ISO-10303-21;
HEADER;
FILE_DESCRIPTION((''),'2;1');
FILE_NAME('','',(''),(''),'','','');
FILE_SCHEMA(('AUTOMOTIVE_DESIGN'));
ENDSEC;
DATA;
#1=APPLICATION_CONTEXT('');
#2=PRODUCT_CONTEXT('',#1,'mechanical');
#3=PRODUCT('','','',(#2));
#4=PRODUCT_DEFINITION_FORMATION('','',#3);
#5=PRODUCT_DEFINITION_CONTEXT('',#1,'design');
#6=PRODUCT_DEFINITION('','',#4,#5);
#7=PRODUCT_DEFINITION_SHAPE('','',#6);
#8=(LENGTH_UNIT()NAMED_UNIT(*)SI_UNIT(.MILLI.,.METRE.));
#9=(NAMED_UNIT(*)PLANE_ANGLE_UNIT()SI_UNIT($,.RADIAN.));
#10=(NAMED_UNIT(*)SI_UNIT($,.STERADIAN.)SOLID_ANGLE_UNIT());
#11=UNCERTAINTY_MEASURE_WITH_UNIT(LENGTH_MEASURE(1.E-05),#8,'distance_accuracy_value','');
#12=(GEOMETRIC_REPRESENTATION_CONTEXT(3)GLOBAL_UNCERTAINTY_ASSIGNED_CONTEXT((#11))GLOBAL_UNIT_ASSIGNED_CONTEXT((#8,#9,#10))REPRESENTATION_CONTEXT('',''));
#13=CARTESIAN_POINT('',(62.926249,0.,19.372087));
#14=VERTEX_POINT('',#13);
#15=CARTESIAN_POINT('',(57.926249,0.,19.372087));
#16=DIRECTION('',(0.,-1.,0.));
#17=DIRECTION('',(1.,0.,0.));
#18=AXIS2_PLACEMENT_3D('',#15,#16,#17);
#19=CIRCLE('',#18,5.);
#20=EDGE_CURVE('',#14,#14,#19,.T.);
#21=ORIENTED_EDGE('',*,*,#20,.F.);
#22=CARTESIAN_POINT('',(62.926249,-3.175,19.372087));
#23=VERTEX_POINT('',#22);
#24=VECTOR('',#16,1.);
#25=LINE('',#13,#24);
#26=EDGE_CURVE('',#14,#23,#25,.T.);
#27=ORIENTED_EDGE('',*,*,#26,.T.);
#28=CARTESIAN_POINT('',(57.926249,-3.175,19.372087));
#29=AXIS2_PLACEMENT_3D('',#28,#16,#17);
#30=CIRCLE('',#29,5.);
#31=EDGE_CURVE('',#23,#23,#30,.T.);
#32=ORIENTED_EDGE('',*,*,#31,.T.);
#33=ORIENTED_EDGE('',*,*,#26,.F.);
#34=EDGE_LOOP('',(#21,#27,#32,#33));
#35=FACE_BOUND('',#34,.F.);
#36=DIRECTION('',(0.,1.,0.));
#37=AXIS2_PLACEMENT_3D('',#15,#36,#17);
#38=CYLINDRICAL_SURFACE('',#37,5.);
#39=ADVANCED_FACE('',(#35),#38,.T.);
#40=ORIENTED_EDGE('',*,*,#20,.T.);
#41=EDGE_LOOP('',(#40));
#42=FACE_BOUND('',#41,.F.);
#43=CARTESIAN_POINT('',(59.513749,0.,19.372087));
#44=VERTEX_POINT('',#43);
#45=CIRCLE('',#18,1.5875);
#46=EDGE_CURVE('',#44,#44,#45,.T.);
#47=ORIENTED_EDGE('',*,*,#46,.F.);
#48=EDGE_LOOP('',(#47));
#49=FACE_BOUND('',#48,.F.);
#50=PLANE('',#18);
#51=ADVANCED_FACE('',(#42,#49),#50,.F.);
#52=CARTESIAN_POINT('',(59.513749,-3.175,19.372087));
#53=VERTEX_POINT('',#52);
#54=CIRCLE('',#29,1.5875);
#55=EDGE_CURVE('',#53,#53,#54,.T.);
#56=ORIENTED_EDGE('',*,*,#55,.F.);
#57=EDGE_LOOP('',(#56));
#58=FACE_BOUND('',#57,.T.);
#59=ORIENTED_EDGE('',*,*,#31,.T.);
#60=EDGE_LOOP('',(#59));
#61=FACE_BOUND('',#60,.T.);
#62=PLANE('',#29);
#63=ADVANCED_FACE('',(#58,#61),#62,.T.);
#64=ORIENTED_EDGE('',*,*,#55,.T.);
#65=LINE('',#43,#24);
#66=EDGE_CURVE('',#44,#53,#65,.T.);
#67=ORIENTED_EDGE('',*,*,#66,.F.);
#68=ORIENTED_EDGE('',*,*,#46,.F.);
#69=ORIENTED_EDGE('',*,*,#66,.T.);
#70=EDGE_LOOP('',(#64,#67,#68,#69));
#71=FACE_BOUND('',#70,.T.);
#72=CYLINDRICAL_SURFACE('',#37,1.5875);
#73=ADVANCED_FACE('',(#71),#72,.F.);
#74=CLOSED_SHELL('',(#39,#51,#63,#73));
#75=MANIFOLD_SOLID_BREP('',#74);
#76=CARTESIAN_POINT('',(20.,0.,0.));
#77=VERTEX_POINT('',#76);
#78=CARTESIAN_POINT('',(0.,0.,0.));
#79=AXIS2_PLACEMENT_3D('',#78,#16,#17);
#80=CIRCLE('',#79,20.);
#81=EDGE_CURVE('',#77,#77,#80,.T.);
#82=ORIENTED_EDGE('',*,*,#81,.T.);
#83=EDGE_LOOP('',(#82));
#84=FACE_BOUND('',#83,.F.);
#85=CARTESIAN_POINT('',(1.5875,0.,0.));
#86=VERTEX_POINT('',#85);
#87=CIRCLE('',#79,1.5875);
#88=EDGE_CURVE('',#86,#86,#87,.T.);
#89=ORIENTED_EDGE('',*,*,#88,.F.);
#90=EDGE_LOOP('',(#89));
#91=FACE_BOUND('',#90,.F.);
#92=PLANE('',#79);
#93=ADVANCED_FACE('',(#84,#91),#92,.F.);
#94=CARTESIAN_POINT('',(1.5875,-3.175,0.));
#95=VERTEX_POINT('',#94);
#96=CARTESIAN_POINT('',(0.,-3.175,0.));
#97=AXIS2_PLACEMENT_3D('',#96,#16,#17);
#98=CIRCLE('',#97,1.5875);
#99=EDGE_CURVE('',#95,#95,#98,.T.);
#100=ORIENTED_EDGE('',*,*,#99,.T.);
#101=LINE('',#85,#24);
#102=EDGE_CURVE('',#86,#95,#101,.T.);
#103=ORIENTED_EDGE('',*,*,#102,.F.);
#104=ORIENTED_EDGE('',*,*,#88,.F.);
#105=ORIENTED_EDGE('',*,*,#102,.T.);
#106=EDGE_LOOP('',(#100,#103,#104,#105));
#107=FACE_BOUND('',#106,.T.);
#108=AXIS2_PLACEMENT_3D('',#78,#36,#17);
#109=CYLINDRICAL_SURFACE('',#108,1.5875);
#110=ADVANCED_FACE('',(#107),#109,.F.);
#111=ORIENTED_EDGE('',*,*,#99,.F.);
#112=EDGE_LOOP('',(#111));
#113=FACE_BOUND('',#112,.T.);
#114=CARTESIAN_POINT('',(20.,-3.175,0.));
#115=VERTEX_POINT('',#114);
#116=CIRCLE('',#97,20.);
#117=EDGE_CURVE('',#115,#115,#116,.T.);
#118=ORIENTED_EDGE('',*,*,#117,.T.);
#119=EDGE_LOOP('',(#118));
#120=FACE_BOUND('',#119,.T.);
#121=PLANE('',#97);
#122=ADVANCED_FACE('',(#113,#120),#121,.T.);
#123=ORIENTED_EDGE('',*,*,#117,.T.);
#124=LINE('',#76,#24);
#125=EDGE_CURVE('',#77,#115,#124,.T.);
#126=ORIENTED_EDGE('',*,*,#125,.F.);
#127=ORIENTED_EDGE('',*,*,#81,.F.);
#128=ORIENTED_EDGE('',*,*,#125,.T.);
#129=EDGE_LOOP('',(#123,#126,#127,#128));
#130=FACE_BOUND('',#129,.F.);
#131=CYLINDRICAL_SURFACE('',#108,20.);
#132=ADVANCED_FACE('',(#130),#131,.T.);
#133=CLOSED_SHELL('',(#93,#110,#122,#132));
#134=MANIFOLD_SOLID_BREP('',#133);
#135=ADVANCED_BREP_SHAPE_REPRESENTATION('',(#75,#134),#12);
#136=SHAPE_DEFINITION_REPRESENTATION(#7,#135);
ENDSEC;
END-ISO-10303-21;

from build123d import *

# Parameters (mm, degrees)
F0_R     = 20
F0_R_2   = 1.5875
F1_DEPTH = 3.175
F2_R     = 5
F2_R_2   = 1.5875
F3_DEPTH = 3.175


# Not quite as in the source:
# - a length typed as a fraction of an inch, garbled in the dataset ("3 / 203.2 mm" for 3/8 in), is restored


with BuildPart() as f1:
    # F0 (on Front) → F1 (new body)
    with BuildSketch(Plane.XZ):
        Circle(F0_R)
        Circle(F0_R_2, mode=Mode.SUBTRACT)
    extrude(amount=F1_DEPTH)


with BuildPart() as f3:
    # F2 (on Front) → F3 (new body)
    with BuildSketch(Plane.XZ):
        with Locations((57.926248759, 19.372086972)):
            Circle(F2_R)
        with Locations((57.926248759, 19.372086972)):
            Circle(F2_R_2, mode=Mode.SUBTRACT)
    extrude(amount=F3_DEPTH)


solid = Compound([f1.part, f3.part])
